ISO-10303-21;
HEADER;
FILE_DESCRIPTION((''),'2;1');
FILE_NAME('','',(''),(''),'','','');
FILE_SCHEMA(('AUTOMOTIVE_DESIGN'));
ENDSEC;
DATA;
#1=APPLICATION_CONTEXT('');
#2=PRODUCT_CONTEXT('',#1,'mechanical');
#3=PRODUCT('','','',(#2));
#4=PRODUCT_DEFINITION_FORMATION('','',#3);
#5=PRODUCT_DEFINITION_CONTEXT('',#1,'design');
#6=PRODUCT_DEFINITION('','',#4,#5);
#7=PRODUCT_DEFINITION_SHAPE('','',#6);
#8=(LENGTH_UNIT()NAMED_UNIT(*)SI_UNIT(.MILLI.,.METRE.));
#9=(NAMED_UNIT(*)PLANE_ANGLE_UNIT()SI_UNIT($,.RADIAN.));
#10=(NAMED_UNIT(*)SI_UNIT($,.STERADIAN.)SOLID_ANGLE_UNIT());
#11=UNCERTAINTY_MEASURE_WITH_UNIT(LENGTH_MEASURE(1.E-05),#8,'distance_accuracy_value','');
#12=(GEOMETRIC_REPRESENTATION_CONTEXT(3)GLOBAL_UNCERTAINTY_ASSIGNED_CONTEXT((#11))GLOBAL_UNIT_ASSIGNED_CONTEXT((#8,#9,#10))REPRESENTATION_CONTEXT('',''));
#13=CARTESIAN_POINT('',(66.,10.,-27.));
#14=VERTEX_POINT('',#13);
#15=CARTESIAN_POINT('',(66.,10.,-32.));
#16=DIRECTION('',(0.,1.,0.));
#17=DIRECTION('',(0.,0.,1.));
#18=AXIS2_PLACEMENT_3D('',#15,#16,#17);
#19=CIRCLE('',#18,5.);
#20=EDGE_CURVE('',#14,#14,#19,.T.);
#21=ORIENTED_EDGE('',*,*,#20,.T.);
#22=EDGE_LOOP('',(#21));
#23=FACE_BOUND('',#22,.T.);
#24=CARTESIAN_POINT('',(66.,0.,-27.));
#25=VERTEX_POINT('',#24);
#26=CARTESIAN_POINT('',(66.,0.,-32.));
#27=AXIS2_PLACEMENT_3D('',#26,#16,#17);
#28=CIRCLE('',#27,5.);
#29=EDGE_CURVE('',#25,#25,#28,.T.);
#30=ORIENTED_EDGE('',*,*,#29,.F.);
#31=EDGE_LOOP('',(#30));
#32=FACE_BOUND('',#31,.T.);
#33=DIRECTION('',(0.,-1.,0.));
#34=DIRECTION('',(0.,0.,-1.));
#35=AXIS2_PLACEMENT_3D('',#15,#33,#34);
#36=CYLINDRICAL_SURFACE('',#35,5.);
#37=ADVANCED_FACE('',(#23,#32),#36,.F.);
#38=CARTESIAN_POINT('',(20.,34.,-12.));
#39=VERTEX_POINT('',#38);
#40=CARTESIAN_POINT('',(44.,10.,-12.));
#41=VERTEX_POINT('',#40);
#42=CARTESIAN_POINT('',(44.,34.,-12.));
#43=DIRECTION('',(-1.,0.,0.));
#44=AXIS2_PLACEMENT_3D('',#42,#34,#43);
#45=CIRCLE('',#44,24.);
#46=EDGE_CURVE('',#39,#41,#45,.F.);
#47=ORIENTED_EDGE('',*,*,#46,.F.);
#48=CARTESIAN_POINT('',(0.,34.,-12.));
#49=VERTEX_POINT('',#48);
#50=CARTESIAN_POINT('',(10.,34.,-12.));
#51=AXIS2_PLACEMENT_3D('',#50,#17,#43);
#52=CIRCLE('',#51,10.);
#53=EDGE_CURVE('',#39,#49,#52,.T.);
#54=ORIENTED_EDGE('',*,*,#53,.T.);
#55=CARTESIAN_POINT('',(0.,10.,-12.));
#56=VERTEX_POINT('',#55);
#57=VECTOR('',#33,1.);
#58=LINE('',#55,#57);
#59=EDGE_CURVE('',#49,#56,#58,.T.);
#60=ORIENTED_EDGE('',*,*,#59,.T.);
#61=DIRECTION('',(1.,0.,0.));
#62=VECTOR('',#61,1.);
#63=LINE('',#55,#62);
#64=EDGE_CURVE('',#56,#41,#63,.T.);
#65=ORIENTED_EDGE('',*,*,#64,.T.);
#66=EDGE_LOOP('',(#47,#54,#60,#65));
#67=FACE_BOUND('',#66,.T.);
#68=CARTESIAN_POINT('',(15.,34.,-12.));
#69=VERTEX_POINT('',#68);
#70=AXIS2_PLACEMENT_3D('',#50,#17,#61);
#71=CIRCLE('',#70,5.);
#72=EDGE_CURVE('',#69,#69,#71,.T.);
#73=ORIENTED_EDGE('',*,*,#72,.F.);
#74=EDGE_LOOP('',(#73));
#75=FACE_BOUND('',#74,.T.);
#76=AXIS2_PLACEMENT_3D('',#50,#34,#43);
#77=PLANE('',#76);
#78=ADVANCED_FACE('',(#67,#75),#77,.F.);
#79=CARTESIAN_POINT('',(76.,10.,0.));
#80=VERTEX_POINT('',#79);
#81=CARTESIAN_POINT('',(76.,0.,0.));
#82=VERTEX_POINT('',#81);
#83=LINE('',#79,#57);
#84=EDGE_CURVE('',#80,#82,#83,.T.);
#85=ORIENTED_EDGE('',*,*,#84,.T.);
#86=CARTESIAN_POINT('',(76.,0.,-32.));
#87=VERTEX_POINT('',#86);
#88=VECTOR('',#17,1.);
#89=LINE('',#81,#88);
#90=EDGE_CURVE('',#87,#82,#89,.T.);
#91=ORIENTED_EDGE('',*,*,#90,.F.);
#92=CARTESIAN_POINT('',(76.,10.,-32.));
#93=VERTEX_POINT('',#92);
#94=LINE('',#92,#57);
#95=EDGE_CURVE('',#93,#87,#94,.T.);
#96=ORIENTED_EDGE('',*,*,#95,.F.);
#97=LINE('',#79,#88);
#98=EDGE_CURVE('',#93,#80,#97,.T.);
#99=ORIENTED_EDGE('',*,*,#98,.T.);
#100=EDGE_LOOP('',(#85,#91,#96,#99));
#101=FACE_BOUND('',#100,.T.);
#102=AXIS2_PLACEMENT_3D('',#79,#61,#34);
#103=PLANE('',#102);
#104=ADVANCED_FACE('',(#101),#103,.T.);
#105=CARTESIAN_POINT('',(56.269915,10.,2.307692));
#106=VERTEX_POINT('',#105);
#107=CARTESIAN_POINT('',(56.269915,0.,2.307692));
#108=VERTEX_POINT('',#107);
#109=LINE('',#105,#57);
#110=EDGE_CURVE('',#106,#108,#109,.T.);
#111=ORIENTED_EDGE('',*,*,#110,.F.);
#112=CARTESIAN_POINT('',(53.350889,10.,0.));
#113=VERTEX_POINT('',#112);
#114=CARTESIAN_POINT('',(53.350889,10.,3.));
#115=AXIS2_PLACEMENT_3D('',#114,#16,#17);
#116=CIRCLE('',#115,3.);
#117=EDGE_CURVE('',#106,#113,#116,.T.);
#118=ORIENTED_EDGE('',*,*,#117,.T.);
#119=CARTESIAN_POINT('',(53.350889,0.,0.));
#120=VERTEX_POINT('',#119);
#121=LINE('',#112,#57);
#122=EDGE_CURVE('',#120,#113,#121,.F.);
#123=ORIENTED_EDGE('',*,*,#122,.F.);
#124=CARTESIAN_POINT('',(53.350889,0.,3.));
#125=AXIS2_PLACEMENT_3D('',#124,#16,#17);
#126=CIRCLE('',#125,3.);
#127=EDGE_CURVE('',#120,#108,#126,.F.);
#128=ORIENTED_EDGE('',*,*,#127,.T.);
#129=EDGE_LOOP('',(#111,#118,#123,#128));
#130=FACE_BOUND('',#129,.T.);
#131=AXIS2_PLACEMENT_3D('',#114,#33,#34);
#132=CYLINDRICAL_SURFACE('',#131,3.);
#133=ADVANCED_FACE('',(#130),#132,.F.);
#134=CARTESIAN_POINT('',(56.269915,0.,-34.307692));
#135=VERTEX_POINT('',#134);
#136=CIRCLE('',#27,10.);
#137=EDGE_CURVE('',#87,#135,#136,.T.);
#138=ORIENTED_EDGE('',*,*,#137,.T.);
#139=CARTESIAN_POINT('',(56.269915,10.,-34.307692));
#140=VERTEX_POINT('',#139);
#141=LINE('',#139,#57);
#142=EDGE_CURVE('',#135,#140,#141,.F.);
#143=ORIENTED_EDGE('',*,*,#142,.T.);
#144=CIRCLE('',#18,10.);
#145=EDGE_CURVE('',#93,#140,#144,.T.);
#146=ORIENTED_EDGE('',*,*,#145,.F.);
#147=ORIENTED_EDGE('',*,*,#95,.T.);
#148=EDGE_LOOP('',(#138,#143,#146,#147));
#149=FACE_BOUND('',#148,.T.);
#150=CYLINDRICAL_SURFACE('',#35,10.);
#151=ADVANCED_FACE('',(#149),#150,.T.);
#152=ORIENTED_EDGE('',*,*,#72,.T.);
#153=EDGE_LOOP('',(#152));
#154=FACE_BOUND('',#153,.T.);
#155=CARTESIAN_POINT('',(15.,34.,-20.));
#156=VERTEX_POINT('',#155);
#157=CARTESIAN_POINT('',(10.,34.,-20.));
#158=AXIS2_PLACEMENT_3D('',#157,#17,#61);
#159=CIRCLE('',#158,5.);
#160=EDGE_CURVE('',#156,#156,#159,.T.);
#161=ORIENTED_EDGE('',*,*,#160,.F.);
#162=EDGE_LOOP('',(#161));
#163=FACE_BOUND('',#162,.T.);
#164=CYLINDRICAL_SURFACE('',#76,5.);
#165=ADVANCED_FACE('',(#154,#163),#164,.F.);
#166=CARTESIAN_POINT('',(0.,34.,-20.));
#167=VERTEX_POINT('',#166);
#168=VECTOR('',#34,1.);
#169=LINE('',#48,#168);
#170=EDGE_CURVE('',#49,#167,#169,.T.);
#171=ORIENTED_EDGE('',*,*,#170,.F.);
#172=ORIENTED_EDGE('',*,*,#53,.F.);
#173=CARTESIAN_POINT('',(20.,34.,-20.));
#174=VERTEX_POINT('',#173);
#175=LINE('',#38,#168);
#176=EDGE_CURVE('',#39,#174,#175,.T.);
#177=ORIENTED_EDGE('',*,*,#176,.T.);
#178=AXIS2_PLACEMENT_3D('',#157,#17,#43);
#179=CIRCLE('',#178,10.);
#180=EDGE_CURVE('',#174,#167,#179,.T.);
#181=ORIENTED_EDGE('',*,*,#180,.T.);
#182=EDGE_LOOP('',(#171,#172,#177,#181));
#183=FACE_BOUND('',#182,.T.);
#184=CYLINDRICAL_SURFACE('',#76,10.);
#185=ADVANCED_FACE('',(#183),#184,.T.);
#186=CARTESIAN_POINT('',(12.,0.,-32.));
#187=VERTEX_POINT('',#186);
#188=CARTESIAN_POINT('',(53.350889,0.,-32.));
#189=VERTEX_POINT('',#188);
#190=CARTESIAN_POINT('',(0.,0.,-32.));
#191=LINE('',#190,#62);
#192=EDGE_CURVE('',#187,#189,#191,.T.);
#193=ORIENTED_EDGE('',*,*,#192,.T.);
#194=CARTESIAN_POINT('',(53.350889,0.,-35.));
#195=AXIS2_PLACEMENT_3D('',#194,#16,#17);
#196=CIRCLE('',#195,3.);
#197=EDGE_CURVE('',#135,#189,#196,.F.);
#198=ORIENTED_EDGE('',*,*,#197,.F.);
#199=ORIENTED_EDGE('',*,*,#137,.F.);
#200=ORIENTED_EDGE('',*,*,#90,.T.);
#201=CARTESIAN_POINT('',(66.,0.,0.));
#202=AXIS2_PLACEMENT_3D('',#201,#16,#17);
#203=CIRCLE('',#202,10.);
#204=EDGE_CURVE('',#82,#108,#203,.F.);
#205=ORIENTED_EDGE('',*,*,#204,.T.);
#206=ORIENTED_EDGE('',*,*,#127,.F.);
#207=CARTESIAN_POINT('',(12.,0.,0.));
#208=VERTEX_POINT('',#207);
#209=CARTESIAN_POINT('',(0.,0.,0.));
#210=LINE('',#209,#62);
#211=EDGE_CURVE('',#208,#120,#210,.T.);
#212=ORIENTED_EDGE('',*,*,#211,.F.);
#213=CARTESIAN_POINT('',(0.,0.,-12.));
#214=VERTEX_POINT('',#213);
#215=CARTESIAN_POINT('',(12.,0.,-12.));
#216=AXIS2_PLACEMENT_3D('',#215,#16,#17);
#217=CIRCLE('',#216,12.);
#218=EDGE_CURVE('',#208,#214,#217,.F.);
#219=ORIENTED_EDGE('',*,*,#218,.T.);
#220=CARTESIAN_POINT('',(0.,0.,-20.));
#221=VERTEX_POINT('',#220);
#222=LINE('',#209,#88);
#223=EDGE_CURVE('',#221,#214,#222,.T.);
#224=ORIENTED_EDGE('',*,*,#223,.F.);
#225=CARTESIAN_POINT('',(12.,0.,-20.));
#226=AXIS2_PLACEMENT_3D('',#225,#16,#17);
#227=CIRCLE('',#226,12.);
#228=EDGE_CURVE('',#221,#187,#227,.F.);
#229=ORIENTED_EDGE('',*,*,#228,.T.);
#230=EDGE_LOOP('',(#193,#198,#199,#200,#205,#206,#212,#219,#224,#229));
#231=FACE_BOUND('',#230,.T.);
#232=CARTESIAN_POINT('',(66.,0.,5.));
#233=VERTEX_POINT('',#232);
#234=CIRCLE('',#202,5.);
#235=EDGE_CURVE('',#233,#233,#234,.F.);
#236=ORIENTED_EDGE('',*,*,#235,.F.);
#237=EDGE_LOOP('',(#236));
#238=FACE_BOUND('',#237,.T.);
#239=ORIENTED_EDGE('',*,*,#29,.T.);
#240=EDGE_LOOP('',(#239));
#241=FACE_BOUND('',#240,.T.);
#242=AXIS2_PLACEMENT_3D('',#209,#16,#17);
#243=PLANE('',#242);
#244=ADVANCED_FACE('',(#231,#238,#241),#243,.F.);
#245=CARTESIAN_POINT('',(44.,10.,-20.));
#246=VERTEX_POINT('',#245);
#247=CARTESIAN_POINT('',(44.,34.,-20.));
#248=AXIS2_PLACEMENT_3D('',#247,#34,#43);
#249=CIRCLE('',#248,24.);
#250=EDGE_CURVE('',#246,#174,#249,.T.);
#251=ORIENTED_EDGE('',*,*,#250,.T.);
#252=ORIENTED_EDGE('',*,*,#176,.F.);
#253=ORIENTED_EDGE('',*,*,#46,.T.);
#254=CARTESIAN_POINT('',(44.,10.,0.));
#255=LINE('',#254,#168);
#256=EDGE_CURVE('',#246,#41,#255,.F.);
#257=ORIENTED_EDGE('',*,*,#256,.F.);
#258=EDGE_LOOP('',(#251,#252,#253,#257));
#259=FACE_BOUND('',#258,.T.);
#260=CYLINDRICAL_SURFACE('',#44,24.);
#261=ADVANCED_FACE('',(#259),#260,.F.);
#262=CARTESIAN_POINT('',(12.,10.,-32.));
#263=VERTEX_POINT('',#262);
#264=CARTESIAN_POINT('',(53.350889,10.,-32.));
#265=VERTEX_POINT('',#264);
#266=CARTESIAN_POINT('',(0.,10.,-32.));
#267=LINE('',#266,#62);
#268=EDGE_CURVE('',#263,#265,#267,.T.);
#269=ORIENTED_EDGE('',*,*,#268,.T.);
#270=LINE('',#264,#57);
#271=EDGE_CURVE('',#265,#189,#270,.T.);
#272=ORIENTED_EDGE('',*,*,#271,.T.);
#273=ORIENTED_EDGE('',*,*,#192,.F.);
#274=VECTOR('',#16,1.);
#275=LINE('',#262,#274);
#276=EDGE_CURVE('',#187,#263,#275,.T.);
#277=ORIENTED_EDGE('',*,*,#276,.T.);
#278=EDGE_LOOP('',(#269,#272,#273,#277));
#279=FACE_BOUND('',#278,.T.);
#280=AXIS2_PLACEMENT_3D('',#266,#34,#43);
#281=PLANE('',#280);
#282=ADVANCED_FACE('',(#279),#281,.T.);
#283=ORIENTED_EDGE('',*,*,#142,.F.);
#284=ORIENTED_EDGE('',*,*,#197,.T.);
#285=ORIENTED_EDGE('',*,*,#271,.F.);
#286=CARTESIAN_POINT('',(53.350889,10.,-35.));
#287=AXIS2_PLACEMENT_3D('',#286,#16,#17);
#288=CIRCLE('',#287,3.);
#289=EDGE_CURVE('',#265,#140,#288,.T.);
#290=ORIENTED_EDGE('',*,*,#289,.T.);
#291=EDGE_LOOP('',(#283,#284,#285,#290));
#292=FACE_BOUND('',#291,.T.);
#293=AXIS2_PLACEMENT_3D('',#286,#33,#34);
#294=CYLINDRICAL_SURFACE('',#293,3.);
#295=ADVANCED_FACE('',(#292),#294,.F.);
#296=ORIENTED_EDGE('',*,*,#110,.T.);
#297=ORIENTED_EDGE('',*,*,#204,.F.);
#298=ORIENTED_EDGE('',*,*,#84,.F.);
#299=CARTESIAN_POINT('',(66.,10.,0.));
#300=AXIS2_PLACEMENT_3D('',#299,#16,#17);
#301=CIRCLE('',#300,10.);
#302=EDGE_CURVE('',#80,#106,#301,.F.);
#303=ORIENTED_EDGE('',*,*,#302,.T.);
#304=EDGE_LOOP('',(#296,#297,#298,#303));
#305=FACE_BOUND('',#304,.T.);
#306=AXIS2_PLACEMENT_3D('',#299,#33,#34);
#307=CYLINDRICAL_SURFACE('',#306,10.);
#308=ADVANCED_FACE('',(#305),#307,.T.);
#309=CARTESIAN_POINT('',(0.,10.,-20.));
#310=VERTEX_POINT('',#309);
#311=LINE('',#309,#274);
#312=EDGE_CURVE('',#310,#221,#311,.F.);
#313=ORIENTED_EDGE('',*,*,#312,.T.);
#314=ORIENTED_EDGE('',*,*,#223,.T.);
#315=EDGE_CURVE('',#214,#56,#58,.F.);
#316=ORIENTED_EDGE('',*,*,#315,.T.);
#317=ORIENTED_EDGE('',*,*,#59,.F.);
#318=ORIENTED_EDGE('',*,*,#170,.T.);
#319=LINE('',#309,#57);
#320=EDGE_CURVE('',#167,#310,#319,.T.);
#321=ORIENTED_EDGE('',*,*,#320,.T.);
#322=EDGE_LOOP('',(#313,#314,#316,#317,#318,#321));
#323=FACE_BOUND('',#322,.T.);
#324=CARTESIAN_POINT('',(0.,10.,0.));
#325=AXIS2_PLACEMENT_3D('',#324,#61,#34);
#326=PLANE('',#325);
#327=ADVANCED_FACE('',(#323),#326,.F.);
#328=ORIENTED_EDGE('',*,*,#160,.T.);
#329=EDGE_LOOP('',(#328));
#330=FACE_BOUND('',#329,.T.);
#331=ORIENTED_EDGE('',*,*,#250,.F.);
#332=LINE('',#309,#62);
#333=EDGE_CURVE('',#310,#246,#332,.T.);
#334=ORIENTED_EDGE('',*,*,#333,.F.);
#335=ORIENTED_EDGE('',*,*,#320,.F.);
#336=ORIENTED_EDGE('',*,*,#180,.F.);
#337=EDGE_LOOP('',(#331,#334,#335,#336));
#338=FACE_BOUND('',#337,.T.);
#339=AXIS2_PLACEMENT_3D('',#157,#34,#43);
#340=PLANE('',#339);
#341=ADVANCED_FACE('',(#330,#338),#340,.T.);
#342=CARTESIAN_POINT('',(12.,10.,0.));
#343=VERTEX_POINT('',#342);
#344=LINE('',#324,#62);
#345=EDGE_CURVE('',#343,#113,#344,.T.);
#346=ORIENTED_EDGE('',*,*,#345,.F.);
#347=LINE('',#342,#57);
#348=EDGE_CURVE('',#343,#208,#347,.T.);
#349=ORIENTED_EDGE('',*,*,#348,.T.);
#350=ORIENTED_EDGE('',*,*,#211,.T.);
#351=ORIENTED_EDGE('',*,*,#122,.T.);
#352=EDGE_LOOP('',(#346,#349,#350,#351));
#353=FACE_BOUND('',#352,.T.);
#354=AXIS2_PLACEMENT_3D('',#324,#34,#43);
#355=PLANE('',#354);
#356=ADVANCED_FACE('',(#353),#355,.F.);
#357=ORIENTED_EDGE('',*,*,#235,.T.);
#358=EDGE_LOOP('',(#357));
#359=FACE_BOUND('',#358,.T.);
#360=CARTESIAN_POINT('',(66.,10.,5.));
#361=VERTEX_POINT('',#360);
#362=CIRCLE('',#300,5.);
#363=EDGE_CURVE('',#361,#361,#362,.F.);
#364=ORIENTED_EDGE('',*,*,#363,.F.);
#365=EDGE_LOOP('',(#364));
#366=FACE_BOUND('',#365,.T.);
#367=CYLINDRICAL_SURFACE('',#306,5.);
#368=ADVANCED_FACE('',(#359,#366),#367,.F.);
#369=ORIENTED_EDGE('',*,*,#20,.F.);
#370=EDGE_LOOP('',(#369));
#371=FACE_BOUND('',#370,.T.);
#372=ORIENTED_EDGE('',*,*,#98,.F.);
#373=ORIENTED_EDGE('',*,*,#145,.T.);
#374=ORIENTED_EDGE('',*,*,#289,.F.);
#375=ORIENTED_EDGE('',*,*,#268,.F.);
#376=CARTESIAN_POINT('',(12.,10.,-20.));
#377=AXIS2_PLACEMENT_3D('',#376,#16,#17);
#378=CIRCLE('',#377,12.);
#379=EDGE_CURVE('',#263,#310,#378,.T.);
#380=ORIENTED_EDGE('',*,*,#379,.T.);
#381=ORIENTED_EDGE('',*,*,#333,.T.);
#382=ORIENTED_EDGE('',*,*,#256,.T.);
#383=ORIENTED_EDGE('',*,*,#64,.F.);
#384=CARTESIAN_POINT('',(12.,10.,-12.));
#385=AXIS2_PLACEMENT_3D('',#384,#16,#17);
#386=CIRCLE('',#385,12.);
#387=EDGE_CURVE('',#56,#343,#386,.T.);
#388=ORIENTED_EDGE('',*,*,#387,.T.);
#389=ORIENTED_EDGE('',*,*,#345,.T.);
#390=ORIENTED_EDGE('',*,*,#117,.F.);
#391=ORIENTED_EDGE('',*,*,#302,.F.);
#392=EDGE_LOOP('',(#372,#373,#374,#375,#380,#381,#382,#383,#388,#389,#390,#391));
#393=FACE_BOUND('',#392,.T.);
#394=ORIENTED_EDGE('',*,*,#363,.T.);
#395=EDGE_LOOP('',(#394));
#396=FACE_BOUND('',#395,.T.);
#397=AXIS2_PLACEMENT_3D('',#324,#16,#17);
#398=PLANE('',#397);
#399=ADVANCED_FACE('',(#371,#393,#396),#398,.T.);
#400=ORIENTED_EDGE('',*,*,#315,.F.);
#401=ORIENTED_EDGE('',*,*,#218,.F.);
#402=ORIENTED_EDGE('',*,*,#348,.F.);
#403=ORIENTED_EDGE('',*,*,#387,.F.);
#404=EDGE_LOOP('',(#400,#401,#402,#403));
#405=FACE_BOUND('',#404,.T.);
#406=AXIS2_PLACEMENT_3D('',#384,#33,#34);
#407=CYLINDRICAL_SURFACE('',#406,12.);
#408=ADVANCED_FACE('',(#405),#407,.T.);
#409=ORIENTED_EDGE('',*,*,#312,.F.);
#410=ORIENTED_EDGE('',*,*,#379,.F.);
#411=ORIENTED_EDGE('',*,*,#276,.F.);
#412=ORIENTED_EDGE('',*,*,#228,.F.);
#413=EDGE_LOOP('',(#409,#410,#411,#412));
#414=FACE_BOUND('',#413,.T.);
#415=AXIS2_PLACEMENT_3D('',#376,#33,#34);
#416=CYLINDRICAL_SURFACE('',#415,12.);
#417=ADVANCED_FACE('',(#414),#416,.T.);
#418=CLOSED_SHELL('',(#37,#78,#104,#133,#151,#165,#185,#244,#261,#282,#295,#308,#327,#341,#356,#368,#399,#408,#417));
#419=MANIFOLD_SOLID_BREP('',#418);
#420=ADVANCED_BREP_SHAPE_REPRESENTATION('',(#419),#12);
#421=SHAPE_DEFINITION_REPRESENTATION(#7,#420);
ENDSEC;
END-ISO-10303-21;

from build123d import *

# Parameters (mm, degrees)
BOSS_EXTRUDE1_DEPTH = 10
FILLET1_R           = 3
FILLET2_R           = 3
FILLET3_R           = 12
FILLET4_R           = 12
SKETCH2_R           = 5
BOSS_EXTRUDE2_DEPTH = 4
FILLET5_R           = 24


with BuildPart() as part:
    # Sketch1 → Boss-Extrude1 (new body)
    with BuildSketch(Plane(origin=(0, 0, 0), x_dir=(1, 0, 0), z_dir=(0, 1, 0))):
        with BuildLine():
            Line((56, 32), (0, 32))
            Line((0, 32), (0, 0))
            Line((0, 0), (56, 0))
            ThreePointArc((56, 0), (66, -10), (76, 0))
            Line((76, 0), (76, 32))
            ThreePointArc((76, 32), (66, 42), (56, 32))
        make_face()
        with BuildLine():
            ThreePointArc((71, 0), (66, -5), (61, 0))
            ThreePointArc((61, 0), (66, 5), (71, 0))
        make_face(mode=Mode.SUBTRACT)
        with BuildLine():
            ThreePointArc((71, 32), (66, 27), (61, 32))
            ThreePointArc((61, 32), (66, 37), (71, 32))
        make_face(mode=Mode.SUBTRACT)
    extrude(amount=BOSS_EXTRUDE1_DEPTH)

    # Fillet1
    fillet1_edges = [part.edges().sort_by_distance(p)[0] for p in [
        (56, 5, 0),
    ]]
    fillet(fillet1_edges, radius=FILLET1_R)

    # Fillet2
    fillet2_edges = [part.edges().sort_by_distance(p)[0] for p in [
        (56, 5, -32),
    ]]
    fillet(fillet2_edges, radius=FILLET2_R)

    # Fillet3
    fillet3_edges = [part.edges().sort_by_distance(p)[0] for p in [
        (0, 5, -32),
    ]]
    fillet(fillet3_edges, radius=FILLET3_R)

    # Fillet4
    fillet4_edges = [part.edges().sort_by_distance(p)[0] for p in [
        (0, 5, 0),
    ]]
    fillet(fillet4_edges, radius=FILLET4_R)

    # Sketch2 → Boss-Extrude2 (add, symmetric)
    with BuildSketch(Plane.XY.offset(-16)):
        with BuildLine():
            Line((0, 10), (0, 34))
            ThreePointArc((0, 34), (10, 44), (20, 34))
            Line((20, 34), (20, 10))
            Line((20, 10), (0, 10))
        make_face()
        with Locations((10, 34)):
            Circle(SKETCH2_R, mode=Mode.SUBTRACT)
    extrude(amount=BOSS_EXTRUDE2_DEPTH, both=True)

    # Fillet5
    fillet5_edges = [part.edges().sort_by_distance(p)[0] for p in [
        (20, 10, -16),
    ]]
    fillet(fillet5_edges, radius=FILLET5_R - 0.0001)  # a hair under: the kernel refuses the full size


solid = part.part
